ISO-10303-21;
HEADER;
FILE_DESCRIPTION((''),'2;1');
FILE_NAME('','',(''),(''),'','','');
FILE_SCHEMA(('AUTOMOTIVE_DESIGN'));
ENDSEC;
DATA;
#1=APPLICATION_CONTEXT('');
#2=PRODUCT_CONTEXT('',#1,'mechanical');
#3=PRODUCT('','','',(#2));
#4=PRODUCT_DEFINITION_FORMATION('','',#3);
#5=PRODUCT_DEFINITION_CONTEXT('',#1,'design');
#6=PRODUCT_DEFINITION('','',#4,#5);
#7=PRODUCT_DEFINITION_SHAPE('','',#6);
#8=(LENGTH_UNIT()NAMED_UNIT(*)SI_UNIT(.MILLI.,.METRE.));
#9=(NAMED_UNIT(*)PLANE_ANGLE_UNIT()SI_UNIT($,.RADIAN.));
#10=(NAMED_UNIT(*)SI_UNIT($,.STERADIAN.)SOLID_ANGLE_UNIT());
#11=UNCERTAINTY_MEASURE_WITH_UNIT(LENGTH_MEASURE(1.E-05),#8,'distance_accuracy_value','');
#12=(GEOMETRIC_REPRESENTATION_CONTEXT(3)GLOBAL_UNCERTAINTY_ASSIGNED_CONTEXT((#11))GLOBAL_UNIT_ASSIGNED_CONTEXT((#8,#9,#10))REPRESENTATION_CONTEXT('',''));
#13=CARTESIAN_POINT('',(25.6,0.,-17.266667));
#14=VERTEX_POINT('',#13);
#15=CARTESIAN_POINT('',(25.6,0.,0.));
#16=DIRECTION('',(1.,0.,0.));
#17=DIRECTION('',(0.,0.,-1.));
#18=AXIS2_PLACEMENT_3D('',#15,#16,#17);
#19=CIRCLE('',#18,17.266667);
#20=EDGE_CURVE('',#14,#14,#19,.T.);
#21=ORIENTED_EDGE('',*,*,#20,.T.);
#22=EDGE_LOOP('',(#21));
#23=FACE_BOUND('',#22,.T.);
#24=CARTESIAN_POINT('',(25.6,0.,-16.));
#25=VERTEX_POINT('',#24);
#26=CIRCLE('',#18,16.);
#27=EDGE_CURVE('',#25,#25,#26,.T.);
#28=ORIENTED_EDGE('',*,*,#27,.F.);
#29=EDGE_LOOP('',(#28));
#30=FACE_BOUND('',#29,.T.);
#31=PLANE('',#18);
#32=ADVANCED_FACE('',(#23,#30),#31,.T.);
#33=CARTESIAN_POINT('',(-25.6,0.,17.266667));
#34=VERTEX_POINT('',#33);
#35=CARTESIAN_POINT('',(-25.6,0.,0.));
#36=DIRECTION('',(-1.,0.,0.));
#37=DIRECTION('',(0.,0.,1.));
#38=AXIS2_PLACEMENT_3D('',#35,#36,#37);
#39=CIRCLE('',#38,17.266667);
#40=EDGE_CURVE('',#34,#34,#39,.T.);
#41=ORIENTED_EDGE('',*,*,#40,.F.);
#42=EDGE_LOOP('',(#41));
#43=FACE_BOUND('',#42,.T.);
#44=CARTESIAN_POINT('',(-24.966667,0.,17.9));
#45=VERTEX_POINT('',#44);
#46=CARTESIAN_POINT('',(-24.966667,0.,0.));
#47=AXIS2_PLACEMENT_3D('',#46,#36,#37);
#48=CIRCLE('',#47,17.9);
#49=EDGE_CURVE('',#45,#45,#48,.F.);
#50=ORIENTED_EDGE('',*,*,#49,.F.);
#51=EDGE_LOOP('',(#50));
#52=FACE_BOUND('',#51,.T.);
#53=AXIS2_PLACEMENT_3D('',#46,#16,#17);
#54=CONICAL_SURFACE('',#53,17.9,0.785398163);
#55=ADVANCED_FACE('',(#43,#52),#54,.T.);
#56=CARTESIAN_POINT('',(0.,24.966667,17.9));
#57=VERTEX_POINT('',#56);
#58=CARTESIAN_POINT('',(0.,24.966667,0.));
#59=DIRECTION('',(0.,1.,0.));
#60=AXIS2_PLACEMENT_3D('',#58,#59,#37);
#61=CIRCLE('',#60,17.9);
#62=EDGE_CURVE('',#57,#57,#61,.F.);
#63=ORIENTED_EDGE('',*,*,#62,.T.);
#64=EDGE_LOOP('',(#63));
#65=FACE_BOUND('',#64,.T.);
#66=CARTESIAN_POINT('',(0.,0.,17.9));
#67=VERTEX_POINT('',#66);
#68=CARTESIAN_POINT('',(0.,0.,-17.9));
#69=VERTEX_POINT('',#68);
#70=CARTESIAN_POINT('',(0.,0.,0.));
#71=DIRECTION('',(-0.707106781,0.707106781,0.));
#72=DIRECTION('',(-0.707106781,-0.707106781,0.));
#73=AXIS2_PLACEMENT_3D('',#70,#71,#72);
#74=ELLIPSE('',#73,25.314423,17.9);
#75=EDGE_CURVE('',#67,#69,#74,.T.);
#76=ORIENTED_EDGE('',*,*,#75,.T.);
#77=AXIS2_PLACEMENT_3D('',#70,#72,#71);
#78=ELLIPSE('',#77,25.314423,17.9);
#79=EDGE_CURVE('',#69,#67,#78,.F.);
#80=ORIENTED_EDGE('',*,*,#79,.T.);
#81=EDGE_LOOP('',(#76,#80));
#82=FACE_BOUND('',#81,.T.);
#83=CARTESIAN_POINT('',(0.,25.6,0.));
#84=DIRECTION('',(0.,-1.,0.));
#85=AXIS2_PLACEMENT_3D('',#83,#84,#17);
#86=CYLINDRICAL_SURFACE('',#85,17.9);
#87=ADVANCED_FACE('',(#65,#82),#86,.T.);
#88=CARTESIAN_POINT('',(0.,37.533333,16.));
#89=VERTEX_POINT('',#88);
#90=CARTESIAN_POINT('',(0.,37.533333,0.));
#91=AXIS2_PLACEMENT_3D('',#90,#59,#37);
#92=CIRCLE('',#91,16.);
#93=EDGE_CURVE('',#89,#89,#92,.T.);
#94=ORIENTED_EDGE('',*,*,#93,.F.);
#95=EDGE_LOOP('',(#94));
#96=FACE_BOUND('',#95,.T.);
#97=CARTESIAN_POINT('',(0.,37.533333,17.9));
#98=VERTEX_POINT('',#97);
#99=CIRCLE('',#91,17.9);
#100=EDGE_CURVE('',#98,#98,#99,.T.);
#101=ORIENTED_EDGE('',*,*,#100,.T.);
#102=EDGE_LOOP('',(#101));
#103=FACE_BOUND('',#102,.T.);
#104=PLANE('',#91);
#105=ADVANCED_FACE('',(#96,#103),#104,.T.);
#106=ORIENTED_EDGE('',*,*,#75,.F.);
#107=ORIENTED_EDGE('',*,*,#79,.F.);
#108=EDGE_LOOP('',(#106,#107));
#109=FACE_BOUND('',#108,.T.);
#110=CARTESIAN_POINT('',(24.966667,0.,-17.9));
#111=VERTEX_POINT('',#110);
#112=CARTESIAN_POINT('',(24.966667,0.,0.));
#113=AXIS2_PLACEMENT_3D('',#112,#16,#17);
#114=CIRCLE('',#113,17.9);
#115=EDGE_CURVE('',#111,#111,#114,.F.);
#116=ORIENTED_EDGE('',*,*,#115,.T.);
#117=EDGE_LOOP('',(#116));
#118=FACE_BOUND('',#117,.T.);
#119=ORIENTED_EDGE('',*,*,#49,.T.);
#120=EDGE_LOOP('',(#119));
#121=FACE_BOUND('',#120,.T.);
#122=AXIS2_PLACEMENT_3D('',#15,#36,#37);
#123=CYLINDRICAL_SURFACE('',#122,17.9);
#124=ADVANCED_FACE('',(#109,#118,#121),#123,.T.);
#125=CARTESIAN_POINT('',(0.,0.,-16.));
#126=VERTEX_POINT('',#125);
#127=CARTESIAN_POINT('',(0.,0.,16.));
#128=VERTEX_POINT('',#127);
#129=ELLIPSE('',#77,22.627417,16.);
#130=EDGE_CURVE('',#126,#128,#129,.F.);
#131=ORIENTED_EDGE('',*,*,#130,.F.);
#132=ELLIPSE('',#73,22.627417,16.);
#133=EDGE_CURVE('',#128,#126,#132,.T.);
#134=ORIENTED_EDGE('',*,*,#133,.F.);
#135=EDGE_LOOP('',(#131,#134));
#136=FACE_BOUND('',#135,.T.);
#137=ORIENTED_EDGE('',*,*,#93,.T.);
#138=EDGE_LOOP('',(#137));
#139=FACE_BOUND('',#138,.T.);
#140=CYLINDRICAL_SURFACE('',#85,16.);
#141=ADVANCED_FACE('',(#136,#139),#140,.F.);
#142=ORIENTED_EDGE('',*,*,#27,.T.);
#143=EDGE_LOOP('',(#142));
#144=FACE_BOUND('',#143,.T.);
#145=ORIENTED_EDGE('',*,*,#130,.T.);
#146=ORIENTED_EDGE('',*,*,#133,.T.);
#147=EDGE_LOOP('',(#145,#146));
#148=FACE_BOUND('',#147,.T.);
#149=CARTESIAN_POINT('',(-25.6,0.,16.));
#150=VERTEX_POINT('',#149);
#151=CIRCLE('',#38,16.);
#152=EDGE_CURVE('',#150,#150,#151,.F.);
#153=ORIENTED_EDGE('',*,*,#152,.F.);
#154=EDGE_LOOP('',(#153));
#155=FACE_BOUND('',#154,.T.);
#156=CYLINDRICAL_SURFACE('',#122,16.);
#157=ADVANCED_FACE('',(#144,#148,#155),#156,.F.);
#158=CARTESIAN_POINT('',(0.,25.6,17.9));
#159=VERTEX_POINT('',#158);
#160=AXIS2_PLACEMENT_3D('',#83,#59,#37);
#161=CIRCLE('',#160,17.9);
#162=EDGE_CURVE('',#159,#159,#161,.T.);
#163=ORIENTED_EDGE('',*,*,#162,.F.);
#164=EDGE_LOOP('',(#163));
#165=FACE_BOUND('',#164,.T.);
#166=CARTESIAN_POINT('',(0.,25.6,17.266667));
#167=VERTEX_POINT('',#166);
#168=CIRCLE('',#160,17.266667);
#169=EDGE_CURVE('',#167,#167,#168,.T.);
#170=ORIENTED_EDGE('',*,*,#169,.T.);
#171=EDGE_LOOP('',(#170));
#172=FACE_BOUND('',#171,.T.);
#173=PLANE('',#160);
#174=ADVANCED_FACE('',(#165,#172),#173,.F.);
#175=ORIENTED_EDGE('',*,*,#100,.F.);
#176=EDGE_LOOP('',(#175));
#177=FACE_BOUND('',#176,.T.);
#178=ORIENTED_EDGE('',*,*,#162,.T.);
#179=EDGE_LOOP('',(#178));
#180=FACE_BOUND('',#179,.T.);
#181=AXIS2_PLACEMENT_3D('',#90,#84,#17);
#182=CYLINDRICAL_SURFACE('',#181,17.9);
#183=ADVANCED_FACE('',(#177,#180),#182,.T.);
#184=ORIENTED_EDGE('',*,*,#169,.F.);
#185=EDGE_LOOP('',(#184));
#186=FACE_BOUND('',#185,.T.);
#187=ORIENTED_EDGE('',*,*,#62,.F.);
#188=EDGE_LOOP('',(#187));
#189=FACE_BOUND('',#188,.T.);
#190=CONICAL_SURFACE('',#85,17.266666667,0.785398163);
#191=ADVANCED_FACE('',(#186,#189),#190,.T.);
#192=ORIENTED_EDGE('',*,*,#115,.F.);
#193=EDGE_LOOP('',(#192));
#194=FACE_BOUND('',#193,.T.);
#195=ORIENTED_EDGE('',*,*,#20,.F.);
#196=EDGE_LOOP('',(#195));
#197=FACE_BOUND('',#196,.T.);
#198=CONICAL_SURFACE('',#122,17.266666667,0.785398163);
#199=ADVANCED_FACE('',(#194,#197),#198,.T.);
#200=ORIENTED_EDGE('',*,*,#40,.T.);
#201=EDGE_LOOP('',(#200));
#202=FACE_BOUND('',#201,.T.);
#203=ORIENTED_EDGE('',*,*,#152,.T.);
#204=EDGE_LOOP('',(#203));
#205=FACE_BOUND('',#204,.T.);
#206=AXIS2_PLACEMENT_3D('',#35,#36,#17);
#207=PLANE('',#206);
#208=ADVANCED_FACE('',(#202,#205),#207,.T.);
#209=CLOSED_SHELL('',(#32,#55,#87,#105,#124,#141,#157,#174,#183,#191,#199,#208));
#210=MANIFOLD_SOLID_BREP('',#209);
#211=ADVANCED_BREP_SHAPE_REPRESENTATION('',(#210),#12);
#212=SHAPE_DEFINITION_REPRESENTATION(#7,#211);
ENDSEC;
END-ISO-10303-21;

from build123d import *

# Parameters (mm, degrees)
RUNROUTE_R           = 17.9
RUNEXTRUDE_DEPTH     = 25.6
OUTLETROUTE_R        = 17.9
OUTLETEXTRUDE_DEPTH  = 25.6
TEESHELL_START       = -25.6
TEESHELL_OUTLINE_R   = 16
TEESHELL_DEPTH       = 51.2
TEESHELL_START_2     = -1e-07
TEESHELL_2_OUTLINE_R = 16
TEESHELL_2_DEPTH     = 25.6000001
TEECHAMFER_SIZE      = 0.633333333
SKETCH_1_R           = 17.9
SKETCH_1_R_2         = 16
EXTRUDE_1_DEPTH      = 11.933333333


with BuildPart() as part:
    # RunRoute → RunExtrude (new body)
    with BuildSketch(Plane(origin=(0, 0, 0), x_dir=(0, 0, -1), z_dir=(1, 0, 0))):
        Circle(RUNROUTE_R)
    runextrude = extrude(amount=RUNEXTRUDE_DEPTH)

    # RunExtrudeMirror: RunExtrude across plane
    add(runextrude.mirror(Plane(origin=(0, 0, 0), x_dir=(0, 0, 1), z_dir=(1, 0, 0))))

    # OutletRoute → OutletExtrude (add)
    with BuildSketch(Plane(origin=(0, 0, 0), x_dir=(1, 0, 0), z_dir=(0, 1, 0))):
        with Locations(Location((0, 0, 0), (0, 0, 270))):
            Circle(OUTLETROUTE_R)
    extrude(amount=OUTLETEXTRUDE_DEPTH)

    # TeeShell: read off the stored shape, not the designer's step
    # TeeShell outline → TeeShell (cut)
    with BuildSketch(Plane.YZ.offset(TEESHELL_START)):
        Circle(TEESHELL_OUTLINE_R)
    extrude(amount=TEESHELL_DEPTH, mode=Mode.SUBTRACT)

    # TeeShell 2 outline → TeeShell 2 (cut)
    with BuildSketch(Plane(origin=(0, 0, 0), x_dir=(1, 0, 0), z_dir=(0, 1, 0)).offset(TEESHELL_START_2)):
        Circle(TEESHELL_2_OUTLINE_R)
    extrude(amount=TEESHELL_2_DEPTH, mode=Mode.SUBTRACT)

    # TeeChamfer
    # the kernel refuses this chamfer: 0.633333333 mm, written as the material it takes off along each edge
    with BuildSketch(Plane(origin=(25.6, 0, 0), x_dir=(0, 0, -1), z_dir=(0, -1, 0))) as teechamfer_piece_1:
        Polygon((17.9, -TEECHAMFER_SIZE), (17.9 - TEECHAMFER_SIZE, 0), (17.9, 0), align=None)
    revolve(axis=Axis((25.6, 0, 0), (1, 0, 0)), mode=Mode.SUBTRACT)
    with BuildSketch(Plane(origin=(-25.6, 0, 0), x_dir=(0, 0, -1), z_dir=(0, -1, 0))) as teechamfer_piece_2:
        Polygon((17.9, TEECHAMFER_SIZE), (17.9 - TEECHAMFER_SIZE, 0), (17.9, 0), align=None)
    revolve(axis=Axis((-25.6, 0, 0), (1, 0, 0)), mode=Mode.SUBTRACT)
    with BuildSketch(Plane(origin=(0, 25.6, 0), x_dir=(0, 0, 1), z_dir=(-1, 0, 0))) as teechamfer_piece_3:
        Polygon((17.9, -TEECHAMFER_SIZE), (17.9 - TEECHAMFER_SIZE, 0), (17.9, 0), align=None)
    revolve(axis=Axis((0, 25.6, 0), (0, 1, 0)), mode=Mode.SUBTRACT)

    # Эскиз1 → Бобышка-Вытянуть1 (add)
    with BuildSketch(Plane(origin=(0, 25.6, 0), x_dir=(1, 0, 0), z_dir=(0, 1, 0))):
        with Locations(Location((0, 0, 0), (0, 0, 270))):
            Circle(SKETCH_1_R)
        with Locations(Location((0, 0, 0), (0, 0, 270))):
            Circle(SKETCH_1_R_2, mode=Mode.SUBTRACT)
    extrude(amount=EXTRUDE_1_DEPTH)


solid = part.part
